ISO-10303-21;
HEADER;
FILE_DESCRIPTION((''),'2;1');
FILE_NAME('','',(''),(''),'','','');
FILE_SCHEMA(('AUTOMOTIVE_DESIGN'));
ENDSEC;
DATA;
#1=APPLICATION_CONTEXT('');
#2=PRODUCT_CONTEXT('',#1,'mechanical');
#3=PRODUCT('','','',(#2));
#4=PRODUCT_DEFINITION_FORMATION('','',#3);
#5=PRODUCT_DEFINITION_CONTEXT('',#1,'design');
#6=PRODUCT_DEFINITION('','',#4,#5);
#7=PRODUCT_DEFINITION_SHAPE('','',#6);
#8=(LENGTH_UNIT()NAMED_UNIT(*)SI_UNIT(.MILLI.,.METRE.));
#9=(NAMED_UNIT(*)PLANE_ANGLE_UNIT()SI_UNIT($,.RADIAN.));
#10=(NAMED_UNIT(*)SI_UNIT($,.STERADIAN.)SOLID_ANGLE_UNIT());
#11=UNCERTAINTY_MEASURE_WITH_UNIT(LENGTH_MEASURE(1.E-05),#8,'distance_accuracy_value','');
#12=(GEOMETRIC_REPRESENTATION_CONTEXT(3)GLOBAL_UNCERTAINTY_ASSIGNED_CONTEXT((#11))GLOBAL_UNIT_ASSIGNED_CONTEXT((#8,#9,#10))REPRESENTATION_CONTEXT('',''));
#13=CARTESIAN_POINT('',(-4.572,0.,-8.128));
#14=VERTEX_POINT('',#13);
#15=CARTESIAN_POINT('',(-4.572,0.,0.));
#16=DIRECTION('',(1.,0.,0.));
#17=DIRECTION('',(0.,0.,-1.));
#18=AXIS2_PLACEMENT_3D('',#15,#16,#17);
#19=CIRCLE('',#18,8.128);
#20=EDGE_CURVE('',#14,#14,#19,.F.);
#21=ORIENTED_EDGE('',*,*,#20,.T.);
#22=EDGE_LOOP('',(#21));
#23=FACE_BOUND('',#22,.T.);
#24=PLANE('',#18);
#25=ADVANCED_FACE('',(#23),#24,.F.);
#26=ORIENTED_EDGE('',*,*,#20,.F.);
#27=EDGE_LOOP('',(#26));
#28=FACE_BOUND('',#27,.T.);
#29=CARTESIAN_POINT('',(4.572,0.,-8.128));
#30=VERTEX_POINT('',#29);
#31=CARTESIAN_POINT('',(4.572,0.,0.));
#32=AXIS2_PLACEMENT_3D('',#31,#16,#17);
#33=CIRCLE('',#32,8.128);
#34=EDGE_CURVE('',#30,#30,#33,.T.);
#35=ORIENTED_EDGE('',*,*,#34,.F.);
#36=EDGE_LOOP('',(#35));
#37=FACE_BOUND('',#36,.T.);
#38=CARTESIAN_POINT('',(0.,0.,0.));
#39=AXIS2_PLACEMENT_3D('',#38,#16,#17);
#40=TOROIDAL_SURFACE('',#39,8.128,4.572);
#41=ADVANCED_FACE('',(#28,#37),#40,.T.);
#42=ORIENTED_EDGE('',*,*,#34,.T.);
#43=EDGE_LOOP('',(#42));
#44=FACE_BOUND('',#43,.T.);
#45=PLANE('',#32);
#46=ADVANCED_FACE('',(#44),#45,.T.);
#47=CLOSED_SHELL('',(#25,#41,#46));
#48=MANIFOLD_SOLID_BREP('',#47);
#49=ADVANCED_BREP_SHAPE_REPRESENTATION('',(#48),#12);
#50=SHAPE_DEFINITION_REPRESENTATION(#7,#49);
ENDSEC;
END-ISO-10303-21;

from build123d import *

# Parameters (mm, degrees)
SKETCH1_R           = 12.7
BOSS_EXTRUDE1_DEPTH = 4.572
FILLET1_R           = 4.572


with BuildPart() as part:
    # Sketch1 → Boss-Extrude1 (new, symmetric)
    with BuildSketch(Plane(origin=(0, 0, 0), x_dir=(0, 0, -1), z_dir=(1, 0, 0))):
        Circle(SKETCH1_R)
    extrude(amount=BOSS_EXTRUDE1_DEPTH, both=True)

    # Fillet1
    fillet1_edges = [part.edges().sort_by_distance(p)[0] for p in [
        (-4.572, 0, 12.7),
        (4.572, 0, 12.7),
    ]]
    fillet(fillet1_edges, radius=FILLET1_R - 0.0001)  # a hair under: the kernel refuses the full size


solid = part.part
